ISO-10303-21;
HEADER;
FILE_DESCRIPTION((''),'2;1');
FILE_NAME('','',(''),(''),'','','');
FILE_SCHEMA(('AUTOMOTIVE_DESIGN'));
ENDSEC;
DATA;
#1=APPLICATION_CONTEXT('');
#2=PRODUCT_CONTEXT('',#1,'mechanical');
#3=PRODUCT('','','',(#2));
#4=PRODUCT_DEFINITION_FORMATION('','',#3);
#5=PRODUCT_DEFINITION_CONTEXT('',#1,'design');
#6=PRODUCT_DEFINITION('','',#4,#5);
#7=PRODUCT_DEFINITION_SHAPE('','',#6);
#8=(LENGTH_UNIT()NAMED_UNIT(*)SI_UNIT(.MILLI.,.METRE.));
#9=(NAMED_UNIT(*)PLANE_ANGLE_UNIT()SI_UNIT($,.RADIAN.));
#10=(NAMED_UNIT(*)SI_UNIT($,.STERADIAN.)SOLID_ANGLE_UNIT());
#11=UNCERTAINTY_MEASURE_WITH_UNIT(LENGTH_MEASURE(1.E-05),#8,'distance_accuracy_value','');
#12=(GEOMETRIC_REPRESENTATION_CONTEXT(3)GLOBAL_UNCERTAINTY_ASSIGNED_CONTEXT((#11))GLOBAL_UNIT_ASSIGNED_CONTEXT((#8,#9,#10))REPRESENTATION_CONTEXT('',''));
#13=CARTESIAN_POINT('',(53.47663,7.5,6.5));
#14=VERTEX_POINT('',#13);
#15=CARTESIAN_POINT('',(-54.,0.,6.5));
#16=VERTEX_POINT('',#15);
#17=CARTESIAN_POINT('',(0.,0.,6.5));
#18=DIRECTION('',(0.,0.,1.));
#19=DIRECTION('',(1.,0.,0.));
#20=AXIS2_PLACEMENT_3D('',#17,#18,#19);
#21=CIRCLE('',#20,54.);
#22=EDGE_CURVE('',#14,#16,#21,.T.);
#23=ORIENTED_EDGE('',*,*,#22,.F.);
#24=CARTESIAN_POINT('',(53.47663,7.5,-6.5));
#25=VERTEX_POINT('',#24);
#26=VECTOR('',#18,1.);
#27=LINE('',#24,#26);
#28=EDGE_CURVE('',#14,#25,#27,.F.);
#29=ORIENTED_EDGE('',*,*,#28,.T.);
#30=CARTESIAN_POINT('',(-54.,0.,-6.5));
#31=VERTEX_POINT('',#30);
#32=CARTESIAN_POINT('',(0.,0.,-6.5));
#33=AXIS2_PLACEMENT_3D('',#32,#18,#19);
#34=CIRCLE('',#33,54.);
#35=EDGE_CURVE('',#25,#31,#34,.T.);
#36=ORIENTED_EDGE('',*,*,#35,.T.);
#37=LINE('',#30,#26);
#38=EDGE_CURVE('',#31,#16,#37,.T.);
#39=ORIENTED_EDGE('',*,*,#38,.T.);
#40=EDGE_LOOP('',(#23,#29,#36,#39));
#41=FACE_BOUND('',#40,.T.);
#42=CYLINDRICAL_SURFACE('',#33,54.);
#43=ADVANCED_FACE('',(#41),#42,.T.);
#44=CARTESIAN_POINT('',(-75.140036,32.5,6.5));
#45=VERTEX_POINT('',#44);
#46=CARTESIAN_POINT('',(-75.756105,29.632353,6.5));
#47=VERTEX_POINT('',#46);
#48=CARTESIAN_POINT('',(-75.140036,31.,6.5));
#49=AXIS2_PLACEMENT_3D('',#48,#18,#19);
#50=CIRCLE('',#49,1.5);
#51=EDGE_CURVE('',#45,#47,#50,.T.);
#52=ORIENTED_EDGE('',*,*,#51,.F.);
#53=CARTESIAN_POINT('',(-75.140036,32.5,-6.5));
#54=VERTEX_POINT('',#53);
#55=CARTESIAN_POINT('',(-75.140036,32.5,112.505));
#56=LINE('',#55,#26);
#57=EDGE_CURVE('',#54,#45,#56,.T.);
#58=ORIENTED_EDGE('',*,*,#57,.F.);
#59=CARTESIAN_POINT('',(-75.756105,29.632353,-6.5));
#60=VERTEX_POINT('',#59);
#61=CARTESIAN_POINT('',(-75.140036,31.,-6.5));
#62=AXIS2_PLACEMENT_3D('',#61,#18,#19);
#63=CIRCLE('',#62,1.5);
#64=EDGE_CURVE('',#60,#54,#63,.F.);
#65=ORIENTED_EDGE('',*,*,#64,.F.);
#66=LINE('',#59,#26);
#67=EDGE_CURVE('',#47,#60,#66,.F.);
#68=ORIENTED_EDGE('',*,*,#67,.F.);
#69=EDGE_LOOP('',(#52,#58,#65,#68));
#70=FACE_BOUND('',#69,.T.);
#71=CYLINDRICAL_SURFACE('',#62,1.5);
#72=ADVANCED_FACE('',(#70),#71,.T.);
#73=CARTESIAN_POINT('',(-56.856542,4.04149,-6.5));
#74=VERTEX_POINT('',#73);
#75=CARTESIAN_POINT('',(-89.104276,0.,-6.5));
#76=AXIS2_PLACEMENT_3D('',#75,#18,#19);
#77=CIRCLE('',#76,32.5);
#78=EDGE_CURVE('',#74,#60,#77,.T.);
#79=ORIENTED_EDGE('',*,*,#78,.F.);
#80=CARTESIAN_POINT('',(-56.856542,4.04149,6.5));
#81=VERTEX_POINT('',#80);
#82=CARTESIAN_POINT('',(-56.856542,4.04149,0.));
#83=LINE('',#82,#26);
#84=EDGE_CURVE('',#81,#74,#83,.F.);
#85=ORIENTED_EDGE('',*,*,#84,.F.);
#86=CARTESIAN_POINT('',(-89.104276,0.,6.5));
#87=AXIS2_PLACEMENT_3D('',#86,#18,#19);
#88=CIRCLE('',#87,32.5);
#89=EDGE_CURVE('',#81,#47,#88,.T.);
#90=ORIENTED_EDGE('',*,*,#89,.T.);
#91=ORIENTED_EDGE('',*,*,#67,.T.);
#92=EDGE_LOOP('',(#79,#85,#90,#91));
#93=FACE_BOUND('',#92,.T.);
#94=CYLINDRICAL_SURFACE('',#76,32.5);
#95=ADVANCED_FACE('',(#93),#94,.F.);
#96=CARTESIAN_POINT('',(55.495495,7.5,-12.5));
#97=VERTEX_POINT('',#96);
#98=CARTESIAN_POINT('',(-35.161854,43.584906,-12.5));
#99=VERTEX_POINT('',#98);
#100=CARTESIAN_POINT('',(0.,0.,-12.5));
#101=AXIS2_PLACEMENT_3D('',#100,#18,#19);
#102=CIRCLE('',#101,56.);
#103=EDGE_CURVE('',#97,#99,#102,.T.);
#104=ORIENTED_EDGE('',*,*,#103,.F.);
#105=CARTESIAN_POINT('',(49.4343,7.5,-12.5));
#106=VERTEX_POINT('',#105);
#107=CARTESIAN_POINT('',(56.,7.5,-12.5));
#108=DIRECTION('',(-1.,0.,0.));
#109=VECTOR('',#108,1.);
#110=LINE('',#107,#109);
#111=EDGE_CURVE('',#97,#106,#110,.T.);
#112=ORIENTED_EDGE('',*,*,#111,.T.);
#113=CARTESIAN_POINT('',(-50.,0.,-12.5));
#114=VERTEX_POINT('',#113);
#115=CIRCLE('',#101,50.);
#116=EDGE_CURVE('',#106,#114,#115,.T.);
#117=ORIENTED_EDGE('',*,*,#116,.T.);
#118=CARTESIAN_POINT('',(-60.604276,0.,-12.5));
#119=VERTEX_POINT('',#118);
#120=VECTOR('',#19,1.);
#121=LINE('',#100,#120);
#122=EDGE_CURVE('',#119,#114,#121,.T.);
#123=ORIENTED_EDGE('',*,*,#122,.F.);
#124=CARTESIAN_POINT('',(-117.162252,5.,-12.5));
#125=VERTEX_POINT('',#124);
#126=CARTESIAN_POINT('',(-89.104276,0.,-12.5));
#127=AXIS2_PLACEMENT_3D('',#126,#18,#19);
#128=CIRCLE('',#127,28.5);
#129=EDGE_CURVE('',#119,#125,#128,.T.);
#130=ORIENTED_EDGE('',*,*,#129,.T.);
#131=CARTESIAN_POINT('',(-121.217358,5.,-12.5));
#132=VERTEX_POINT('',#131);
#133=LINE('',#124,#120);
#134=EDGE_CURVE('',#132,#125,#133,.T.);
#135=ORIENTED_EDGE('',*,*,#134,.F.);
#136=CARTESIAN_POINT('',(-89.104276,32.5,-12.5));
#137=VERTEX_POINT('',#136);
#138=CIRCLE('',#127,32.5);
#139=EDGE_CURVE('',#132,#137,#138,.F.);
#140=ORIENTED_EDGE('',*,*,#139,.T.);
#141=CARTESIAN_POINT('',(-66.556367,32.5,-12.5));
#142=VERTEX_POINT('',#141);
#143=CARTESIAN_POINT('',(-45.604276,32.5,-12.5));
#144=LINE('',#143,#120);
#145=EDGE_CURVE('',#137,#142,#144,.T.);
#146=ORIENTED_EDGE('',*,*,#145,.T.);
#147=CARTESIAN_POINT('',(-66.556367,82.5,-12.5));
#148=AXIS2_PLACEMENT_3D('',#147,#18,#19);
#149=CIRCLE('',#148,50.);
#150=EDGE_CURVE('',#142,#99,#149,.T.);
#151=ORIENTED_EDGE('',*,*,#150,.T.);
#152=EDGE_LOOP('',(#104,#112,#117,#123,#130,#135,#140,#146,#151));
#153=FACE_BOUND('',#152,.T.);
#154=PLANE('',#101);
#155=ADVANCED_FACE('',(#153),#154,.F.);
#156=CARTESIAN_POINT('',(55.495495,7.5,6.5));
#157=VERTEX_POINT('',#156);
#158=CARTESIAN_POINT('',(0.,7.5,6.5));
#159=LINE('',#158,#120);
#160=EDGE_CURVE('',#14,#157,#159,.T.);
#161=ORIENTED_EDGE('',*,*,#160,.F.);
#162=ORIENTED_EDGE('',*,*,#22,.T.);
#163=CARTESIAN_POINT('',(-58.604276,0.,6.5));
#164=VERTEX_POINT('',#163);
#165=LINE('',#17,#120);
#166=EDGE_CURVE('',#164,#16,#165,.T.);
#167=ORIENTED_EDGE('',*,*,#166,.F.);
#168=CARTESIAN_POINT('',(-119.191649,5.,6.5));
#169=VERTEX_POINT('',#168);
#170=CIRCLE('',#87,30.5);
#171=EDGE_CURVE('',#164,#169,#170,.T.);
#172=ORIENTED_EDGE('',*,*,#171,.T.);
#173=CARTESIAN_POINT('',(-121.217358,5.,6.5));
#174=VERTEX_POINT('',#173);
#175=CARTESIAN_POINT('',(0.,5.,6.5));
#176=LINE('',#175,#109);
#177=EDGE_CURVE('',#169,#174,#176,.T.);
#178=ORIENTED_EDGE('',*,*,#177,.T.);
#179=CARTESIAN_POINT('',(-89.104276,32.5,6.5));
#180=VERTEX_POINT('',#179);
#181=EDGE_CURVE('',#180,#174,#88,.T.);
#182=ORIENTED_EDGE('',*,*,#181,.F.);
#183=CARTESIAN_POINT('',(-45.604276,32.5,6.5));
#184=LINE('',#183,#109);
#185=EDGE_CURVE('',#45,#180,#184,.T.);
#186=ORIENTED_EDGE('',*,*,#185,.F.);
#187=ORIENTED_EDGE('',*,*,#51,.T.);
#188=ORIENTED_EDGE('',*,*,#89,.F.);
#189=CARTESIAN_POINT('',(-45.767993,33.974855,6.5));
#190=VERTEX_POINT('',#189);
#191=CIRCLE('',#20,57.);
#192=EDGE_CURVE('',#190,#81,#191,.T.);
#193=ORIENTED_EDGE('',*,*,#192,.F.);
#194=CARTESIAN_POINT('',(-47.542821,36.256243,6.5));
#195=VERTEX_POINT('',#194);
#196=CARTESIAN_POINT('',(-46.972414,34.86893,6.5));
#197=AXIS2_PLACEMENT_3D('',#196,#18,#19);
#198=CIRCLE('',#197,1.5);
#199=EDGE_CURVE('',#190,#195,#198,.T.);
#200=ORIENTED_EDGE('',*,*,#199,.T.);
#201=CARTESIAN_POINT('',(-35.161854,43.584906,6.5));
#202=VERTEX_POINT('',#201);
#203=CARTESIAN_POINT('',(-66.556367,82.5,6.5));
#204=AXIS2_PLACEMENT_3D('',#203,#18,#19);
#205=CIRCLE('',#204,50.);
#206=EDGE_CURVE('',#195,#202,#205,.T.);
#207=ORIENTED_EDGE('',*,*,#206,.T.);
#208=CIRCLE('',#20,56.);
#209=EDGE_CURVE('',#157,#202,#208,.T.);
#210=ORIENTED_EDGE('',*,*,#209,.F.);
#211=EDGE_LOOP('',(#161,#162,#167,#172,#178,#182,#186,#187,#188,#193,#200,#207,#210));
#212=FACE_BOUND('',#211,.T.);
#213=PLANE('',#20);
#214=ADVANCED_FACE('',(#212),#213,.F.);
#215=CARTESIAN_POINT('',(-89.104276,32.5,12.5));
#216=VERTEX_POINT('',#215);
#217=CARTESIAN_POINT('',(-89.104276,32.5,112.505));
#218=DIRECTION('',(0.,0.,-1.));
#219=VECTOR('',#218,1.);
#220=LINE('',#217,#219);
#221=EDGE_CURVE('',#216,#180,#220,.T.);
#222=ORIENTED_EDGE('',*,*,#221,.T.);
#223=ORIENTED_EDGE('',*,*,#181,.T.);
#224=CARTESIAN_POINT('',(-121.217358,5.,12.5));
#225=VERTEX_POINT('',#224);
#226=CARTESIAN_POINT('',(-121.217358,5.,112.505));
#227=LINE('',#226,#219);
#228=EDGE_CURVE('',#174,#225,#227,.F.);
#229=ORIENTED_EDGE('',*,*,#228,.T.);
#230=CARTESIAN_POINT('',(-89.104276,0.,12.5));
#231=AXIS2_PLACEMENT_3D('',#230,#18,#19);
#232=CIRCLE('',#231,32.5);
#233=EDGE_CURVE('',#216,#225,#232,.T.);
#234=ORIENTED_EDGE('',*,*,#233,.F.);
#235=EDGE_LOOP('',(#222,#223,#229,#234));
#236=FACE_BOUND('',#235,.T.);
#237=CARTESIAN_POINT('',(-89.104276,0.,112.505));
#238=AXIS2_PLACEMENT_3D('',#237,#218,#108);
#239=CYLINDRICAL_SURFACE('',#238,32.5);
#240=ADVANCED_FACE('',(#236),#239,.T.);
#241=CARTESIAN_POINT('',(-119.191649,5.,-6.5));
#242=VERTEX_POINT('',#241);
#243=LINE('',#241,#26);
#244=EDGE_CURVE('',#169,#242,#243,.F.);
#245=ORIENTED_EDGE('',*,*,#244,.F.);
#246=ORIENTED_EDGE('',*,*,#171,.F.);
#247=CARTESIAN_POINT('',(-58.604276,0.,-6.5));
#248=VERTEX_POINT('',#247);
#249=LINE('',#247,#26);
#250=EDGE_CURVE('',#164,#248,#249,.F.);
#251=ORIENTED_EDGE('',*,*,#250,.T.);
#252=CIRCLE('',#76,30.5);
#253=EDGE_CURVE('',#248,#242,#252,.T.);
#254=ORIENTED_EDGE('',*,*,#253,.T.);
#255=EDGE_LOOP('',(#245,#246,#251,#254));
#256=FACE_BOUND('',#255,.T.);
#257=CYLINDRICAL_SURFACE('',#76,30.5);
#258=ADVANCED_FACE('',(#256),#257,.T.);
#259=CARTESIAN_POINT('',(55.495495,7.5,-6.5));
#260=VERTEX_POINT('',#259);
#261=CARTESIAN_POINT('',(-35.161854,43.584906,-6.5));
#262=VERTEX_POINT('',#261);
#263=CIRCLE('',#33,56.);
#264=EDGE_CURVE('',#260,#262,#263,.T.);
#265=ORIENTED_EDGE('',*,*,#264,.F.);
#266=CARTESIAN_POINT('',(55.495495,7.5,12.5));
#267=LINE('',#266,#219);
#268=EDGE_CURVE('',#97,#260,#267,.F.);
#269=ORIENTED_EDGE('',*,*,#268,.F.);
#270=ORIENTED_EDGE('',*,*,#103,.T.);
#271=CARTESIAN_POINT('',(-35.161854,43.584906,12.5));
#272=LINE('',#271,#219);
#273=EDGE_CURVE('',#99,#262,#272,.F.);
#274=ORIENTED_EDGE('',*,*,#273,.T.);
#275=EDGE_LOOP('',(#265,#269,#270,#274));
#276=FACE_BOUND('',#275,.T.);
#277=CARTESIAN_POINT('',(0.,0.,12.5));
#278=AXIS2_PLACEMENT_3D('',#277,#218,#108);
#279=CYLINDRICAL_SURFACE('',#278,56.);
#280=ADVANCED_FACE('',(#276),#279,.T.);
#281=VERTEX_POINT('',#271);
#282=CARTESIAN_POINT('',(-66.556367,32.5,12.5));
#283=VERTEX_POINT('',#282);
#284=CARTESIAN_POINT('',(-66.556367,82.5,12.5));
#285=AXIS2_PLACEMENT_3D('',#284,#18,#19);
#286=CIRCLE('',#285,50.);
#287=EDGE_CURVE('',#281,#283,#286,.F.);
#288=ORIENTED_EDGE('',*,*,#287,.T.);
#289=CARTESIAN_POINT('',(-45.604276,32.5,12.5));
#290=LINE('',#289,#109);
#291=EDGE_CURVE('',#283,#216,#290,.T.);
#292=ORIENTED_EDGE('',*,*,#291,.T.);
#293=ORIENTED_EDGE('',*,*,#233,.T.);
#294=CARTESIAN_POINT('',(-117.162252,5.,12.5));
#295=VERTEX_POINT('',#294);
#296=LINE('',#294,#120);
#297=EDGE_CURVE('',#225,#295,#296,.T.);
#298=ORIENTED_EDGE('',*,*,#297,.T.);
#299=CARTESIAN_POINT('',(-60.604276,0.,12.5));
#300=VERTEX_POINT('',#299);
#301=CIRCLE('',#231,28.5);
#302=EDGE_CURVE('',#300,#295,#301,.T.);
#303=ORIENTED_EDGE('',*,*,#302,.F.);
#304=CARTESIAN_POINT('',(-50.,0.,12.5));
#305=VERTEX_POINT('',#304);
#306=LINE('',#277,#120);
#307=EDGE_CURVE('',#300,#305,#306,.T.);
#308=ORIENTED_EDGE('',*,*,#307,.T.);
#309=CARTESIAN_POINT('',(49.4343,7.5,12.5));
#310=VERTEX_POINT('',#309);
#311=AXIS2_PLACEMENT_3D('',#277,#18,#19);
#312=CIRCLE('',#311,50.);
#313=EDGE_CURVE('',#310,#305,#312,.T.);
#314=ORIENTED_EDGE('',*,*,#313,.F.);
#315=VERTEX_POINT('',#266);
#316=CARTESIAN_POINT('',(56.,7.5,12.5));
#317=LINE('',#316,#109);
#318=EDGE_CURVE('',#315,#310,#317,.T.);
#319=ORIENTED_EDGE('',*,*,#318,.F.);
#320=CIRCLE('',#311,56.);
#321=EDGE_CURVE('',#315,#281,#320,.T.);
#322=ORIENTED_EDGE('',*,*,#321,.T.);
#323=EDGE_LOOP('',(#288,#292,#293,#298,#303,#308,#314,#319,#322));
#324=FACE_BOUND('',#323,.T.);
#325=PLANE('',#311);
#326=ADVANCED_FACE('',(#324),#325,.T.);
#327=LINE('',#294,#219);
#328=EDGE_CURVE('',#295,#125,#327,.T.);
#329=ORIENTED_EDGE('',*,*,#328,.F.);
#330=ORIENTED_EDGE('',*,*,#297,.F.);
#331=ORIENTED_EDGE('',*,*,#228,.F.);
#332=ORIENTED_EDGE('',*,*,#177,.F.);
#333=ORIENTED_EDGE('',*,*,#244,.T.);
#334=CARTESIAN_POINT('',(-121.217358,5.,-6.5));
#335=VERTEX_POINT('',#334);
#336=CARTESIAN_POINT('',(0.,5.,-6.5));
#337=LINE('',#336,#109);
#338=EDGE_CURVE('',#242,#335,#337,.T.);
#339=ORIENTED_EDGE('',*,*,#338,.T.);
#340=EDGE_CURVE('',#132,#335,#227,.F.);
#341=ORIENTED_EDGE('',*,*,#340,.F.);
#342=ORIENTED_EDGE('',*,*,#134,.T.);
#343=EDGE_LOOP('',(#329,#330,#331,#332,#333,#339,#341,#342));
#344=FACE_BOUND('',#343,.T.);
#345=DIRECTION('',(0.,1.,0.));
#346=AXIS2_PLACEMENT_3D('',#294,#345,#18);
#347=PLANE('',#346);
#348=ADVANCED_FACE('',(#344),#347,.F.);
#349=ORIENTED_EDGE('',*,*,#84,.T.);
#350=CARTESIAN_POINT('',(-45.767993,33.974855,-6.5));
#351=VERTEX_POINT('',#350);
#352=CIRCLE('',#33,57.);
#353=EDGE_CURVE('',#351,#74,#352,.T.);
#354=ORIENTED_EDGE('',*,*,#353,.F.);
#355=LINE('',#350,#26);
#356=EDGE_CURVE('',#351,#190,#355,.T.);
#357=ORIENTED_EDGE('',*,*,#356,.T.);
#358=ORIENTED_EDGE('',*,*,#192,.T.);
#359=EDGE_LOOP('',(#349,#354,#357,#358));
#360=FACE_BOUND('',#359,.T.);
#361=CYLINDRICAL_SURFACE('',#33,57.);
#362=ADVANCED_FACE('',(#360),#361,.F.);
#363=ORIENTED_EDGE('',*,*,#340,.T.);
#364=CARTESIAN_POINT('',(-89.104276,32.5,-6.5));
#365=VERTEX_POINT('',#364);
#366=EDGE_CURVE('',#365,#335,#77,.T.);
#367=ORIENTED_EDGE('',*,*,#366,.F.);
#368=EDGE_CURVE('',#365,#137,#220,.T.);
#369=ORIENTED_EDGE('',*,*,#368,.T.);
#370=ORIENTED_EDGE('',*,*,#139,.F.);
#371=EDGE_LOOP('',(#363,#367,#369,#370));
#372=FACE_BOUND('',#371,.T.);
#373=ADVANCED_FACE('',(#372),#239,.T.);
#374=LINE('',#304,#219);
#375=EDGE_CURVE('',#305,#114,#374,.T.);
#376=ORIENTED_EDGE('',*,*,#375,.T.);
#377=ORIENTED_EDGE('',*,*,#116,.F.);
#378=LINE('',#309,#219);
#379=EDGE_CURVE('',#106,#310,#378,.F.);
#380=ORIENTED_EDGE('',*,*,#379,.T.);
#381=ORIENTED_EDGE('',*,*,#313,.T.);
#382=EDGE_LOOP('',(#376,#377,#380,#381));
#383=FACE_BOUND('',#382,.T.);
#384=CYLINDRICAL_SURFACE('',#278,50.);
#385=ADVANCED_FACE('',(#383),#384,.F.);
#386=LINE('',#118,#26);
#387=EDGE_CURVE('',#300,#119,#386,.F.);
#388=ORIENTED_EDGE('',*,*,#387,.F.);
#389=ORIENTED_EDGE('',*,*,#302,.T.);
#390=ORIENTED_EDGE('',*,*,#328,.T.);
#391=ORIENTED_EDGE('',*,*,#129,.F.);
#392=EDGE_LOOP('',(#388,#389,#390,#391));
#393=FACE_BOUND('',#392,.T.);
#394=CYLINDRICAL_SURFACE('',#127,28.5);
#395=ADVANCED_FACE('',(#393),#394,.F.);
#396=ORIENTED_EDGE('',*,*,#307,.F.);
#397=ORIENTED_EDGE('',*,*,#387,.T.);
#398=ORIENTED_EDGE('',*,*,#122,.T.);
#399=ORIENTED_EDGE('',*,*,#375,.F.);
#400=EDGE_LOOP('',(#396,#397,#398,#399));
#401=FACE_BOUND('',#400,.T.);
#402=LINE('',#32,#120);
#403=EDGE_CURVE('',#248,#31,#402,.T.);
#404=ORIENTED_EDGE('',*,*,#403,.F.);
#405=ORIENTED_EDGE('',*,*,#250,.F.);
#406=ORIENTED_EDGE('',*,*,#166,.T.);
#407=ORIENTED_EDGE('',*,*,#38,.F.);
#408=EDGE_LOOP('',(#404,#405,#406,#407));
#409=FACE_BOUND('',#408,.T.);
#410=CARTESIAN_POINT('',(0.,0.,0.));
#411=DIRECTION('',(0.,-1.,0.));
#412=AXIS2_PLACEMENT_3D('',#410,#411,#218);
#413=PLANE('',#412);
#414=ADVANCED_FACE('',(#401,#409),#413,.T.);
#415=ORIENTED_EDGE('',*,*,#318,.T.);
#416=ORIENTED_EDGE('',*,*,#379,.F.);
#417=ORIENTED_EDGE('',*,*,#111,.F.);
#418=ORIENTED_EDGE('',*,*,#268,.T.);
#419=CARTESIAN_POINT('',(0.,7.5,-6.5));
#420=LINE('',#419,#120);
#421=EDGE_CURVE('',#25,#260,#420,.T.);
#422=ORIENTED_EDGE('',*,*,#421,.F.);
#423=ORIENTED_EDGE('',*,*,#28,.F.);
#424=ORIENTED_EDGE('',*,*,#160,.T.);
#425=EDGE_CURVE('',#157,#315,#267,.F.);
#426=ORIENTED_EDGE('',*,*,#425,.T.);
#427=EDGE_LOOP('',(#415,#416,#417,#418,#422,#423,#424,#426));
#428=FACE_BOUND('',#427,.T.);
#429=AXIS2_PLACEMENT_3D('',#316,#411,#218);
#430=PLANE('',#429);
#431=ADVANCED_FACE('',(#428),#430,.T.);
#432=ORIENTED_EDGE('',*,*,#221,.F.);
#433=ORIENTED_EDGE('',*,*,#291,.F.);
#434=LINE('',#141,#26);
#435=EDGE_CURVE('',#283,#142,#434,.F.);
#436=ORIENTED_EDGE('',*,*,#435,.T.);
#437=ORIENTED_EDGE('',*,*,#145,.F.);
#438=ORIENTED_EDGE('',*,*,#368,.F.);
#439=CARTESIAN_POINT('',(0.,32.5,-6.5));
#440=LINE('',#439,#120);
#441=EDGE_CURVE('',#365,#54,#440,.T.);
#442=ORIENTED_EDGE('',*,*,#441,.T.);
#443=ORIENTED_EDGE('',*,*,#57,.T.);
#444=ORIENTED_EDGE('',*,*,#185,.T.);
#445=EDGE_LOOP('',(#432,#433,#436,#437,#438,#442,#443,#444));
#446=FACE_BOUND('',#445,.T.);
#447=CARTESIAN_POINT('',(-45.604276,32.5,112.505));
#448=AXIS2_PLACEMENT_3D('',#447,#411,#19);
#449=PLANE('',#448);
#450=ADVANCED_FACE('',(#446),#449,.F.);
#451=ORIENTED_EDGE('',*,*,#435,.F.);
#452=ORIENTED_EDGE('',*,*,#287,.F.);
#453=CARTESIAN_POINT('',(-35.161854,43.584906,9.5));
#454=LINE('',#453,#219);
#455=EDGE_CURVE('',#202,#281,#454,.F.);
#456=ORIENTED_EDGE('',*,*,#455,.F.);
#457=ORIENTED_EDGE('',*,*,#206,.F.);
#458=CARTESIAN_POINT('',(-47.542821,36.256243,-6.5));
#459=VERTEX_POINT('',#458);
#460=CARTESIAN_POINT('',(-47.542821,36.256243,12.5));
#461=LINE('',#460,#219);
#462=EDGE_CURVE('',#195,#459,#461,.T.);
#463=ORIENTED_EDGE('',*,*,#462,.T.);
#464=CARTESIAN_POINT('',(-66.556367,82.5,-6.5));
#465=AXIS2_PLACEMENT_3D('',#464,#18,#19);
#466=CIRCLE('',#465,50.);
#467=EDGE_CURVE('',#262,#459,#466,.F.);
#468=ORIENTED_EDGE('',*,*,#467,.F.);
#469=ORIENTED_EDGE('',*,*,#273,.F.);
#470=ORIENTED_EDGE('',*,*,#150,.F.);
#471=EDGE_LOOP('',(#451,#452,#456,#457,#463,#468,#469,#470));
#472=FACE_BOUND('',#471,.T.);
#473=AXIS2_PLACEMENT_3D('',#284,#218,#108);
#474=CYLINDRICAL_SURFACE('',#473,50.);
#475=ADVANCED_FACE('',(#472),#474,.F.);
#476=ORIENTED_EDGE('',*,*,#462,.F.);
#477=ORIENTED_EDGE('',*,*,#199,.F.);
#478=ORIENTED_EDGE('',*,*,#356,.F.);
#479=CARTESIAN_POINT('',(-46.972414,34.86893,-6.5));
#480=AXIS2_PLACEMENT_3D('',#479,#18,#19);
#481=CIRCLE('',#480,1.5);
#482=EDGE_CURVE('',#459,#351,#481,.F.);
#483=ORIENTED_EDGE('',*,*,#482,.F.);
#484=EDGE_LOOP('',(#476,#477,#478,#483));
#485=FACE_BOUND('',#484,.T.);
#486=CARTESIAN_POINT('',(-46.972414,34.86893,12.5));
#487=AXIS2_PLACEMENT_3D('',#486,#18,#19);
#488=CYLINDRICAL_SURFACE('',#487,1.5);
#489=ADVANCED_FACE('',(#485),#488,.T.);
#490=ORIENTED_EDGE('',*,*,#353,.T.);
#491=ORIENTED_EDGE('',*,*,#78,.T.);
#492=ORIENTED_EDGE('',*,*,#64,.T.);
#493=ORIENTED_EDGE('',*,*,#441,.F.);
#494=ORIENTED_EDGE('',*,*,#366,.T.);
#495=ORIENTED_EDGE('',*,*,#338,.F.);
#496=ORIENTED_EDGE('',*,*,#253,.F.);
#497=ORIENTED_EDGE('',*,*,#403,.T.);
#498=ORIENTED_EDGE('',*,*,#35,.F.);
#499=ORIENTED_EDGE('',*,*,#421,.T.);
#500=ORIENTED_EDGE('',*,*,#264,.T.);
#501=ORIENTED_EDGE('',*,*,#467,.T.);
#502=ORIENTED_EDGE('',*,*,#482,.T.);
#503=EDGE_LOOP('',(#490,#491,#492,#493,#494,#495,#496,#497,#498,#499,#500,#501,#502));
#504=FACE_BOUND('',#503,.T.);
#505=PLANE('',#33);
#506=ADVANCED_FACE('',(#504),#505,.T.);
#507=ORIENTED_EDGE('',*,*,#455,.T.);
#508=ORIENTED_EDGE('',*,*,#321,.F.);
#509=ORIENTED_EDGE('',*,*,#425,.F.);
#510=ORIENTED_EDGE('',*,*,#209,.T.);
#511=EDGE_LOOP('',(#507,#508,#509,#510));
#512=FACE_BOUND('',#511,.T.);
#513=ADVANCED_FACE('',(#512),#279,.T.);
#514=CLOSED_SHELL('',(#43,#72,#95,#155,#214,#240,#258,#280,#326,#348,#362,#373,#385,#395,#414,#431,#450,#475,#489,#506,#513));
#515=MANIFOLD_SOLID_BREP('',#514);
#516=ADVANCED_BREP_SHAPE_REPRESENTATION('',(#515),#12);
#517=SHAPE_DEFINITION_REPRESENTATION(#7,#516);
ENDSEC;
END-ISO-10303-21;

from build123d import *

# Parameters (mm, degrees)
SKETCH1_R                     = 56
SKETCH1_R_2                   = 50
MAIN_SHAPE_DEPTH              = 12.5
LIGHT_MOUNT_REACH             = 82.176
LIGHT_MOUNT_DIRECTION_2_REACH = 82.176
SKETCH3_R                     = 57
SKETCH3_R_2                   = 54
MAIN_SLOT_DEPTH               = 6.5
LIGHT_CUT_DEPTH               = 135.461332618
LIGHT_CUT_DEPTH_BACK          = 135.461332618
SKETCH8_R                     = 28.5
SKETCH9_R                     = 32.5
SKETCH9_R_2                   = 30.5
LIGHT_SLOT_DEPTH              = 6.5
LIGHT_MOUNT_FILLET_R          = 50
SKETCH17_W                    = 4.884048614
SKETCH17_H                    = 10
LIGHT_KEYWAY_DEPTH            = 137.193244948
SKETCH19_W                    = 25
SKETCH19_H                    = 15
CUT_EXTRUDE1_DEPTH            = 135.11151246
FILLET1_START                 = -6.5
FILLET1_DEPTH                 = 13
SKETCH20_W                    = 284.103750492
SKETCH20_H                    = 110.008077322
CUT_EXTRUDE2_DEPTH            = 135.11151246


with BuildPart() as part:
    # Sketch1 → main shape (new, symmetric)
    with BuildSketch(Plane.XY):
        Circle(SKETCH1_R)
        Circle(SKETCH1_R_2, mode=Mode.SUBTRACT)
    extrude(amount=MAIN_SHAPE_DEPTH, both=True)

    # light mount: up to this face of the body (flat: up to its plane)
    light_mount_end = Plane(part.part.faces().sort_by_distance((-54.41608081, 0, 12.5))[0])
    # Sketch6 → light mount (add, up to the picked face)
    with BuildSketch(Plane.XY, mode=Mode.PRIVATE) as light_mount_sk1:
        with BuildLine():
            Line((-45.604276115, 32.5), (-89.104276115, 32.5))
            ThreePointArc((-89.104276115, 32.5), (-121.604276115, 0), (-89.104276115, -32.5))
            Line((-89.104276115, -32.5), (-45.604276115, -32.5))
            ThreePointArc((-45.604276115, -32.5), (-56, 0), (-45.604276115, 32.5))
        make_face()
    light_mount_tool1 = split(extrude(light_mount_sk1.sketch, amount=LIGHT_MOUNT_REACH, mode=Mode.PRIVATE), bisect_by=light_mount_end, keep=Keep.BOTH, mode=Mode.PRIVATE)
    add(light_mount_tool1.solids().sort_by(Axis((-84.001692, 0, 0), (0, 0, 1)))[0])

    # light mount direction 2: up to this face of the body (flat: up to its plane)
    light_mount_direction_2_end = Plane(part.part.faces().sort_by_distance((-54.41608081, 0, -12.5))[0])
    # Sketch6 → light mount direction 2 (add, up to the picked face)
    with BuildSketch(Plane.XY, mode=Mode.PRIVATE) as light_mount_direction_2_sk1:
        with BuildLine():
            Line((-45.604276115, 32.5), (-89.104276115, 32.5))
            ThreePointArc((-89.104276115, 32.5), (-121.604276115, 0), (-89.104276115, -32.5))
            Line((-89.104276115, -32.5), (-45.604276115, -32.5))
            ThreePointArc((-45.604276115, -32.5), (-56, 0), (-45.604276115, 32.5))
        make_face()
    light_mount_direction_2_tool1 = split(extrude(light_mount_direction_2_sk1.sketch, amount=-LIGHT_MOUNT_DIRECTION_2_REACH, mode=Mode.PRIVATE), bisect_by=light_mount_direction_2_end, keep=Keep.BOTH, mode=Mode.PRIVATE)
    add(light_mount_direction_2_tool1.solids().sort_by(Axis((-84.001692, 0, 0), (0, 0, -1)))[0])

    # Sketch3 → main slot (cut, symmetric)
    with BuildSketch(Plane.XY):
        Circle(SKETCH3_R)
        Circle(SKETCH3_R_2, mode=Mode.SUBTRACT)
    extrude(amount=MAIN_SLOT_DEPTH, both=True, mode=Mode.SUBTRACT)

    # Sketch8 → light cut (cut, two sides: drawn at the far end of the back side and taken through both)
    with BuildSketch(Plane.XY.offset(-LIGHT_CUT_DEPTH_BACK)):
        with Locations((-89.104276115, 0)):
            Circle(SKETCH8_R)
    extrude(amount=LIGHT_CUT_DEPTH + LIGHT_CUT_DEPTH_BACK, mode=Mode.SUBTRACT)

    # Sketch9 → light slot (cut, symmetric)
    with BuildSketch(Plane.XY):
        with Locations((-89.104276115, 0)):
            Circle(SKETCH9_R)
        with Locations((-89.104276115, 0)):
            Circle(SKETCH9_R_2, mode=Mode.SUBTRACT)
    extrude(amount=LIGHT_SLOT_DEPTH, both=True, mode=Mode.SUBTRACT)

    # light mount fillet
    # the kernel refuses this fillet: 50 mm, written as the material it adds along each edge
    with BuildSketch(Plane(origin=(-45.604276115, 32.5, -12.5), x_dir=(0.6856978375591282, 0.7278863067586417, 0), z_dir=(0, 0, 1))) as light_mount_fillet_piece_1_section:
        with BuildLine():
            CenterArc((22.027511865, 49.535631995), LIGHT_MOUNT_FILLET_R, 223.290512858, 38.89464037)
            Line((-14.366803473, 15.250740117), (0, 0))
            ThreePointArc((0, 0), (7.614448546, 0.520092165), (15.228897092, 0))
        make_face()
    light_mount_fillet_piece_1 = extrude(amount=6, mode=Mode.PRIVATE)
    light_mount_fillet_piece_1 = light_mount_fillet_piece_1 & Plane(origin=(0, 0, -12.5), x_dir=(1, 0, 0), z_dir=(0, 0, 1)) * Cylinder(57, 74, mode=Mode.PRIVATE)
    add(light_mount_fillet_piece_1)
    with BuildSketch(Plane(origin=(-45.604276115, 32.5, -12.5), x_dir=(0.6856978375591282, 0.7278863067586417, 0), z_dir=(0, 0, 1))) as light_mount_fillet_piece_2_section:
        with BuildLine():
            CenterArc((22.027511865, 49.535631995), LIGHT_MOUNT_FILLET_R, 223.290512858, 38.89464037)
            Line((-14.366803473, 15.250740117), (0, 0))
            ThreePointArc((0, 0), (7.614448546, 0.520092165), (15.228897092, 0))
        make_face()
    light_mount_fillet_piece_2 = extrude(amount=6, mode=Mode.PRIVATE)
    light_mount_fillet_piece_2 = light_mount_fillet_piece_2 - Plane(origin=(0, 0, -12.5), x_dir=(1, 0, 0), z_dir=(0, 0, 1)) * Cylinder(57, 74, mode=Mode.PRIVATE)
    add(light_mount_fillet_piece_2)
    with BuildSketch(Plane(origin=(-45.604276115, 32.5, -12.5), x_dir=(0.6856978375591282, 0.7278863067586417, 0), z_dir=(0, 0, 1))) as light_mount_fillet_piece_3_section:
        with BuildLine():
            CenterArc((22.027511865, 49.535631995), LIGHT_MOUNT_FILLET_R, 223.290512858, 38.89464037)
            Line((-14.366803473, 15.250740117), (0, 0))
            ThreePointArc((0, 0), (7.614448546, 0.520092165), (15.228897092, 0))
        make_face()
    light_mount_fillet_piece_3 = extrude(amount=58.380227433, mode=Mode.PRIVATE)
    light_mount_fillet_piece_3 = split(light_mount_fillet_piece_3, bisect_by=Plane(origin=(-45.604276115, 32.5, -6.5), z_dir=(0, 0, 1)), keep=Keep.TOP, mode=Mode.PRIVATE)
    light_mount_fillet_piece_3 = split(light_mount_fillet_piece_3, bisect_by=Plane(origin=(-45.604276115, 32.5, 6.5), z_dir=(0, 0, -1)), keep=Keep.TOP, mode=Mode.PRIVATE)
    light_mount_fillet_piece_3 = light_mount_fillet_piece_3 - Plane(origin=(0, 0, -12.5), x_dir=(1, 0, 0), z_dir=(0, 0, 1)) * Cylinder(57, 178, mode=Mode.PRIVATE)
    add(light_mount_fillet_piece_3)
    with BuildSketch(Plane(origin=(-45.604276115, 32.5, -12.5), x_dir=(0.6856978375591282, 0.7278863067586417, 0), z_dir=(0, 0, 1))) as light_mount_fillet_piece_4_section:
        with BuildLine():
            CenterArc((22.027511865, 49.535631995), LIGHT_MOUNT_FILLET_R, 223.290512858, 38.89464037)
            Line((-14.366803473, 15.250740117), (0, 0))
            ThreePointArc((0, 0), (7.614448546, 0.520092165), (15.228897092, 0))
        make_face()
    light_mount_fillet_piece_4 = extrude(amount=58.380227433, mode=Mode.PRIVATE)
    light_mount_fillet_piece_4 = split(light_mount_fillet_piece_4, bisect_by=Plane(origin=(-45.604276115, 32.5, 12.5), z_dir=(0, 0, -1)), keep=Keep.TOP, mode=Mode.PRIVATE)
    light_mount_fillet_piece_4 = split(light_mount_fillet_piece_4, bisect_by=Plane(origin=(-45.604276115, 32.5, 6.5), z_dir=(0, 0, 1)), keep=Keep.TOP, mode=Mode.PRIVATE)
    light_mount_fillet_piece_4 = light_mount_fillet_piece_4 & Plane(origin=(0, 0, -12.5), x_dir=(1, 0, 0), z_dir=(0, 0, 1)) * Cylinder(57, 178, mode=Mode.PRIVATE)
    add(light_mount_fillet_piece_4)
    with BuildSketch(Plane(origin=(-45.604276115, 32.5, -12.5), x_dir=(0.6856978375591282, 0.7278863067586417, 0), z_dir=(0, 0, 1))) as light_mount_fillet_piece_5_section:
        with BuildLine():
            CenterArc((22.027511865, 49.535631995), LIGHT_MOUNT_FILLET_R, 223.290512858, 38.89464037)
            Line((-14.366803473, 15.250740117), (0, 0))
            ThreePointArc((0, 0), (7.614448546, 0.520092165), (15.228897092, 0))
        make_face()
    light_mount_fillet_piece_5 = extrude(amount=58.380227433, mode=Mode.PRIVATE)
    light_mount_fillet_piece_5 = split(light_mount_fillet_piece_5, bisect_by=Plane(origin=(-45.604276115, 32.5, 12.5), z_dir=(0, 0, -1)), keep=Keep.TOP, mode=Mode.PRIVATE)
    light_mount_fillet_piece_5 = split(light_mount_fillet_piece_5, bisect_by=Plane(origin=(-45.604276115, 32.5, 6.5), z_dir=(0, 0, 1)), keep=Keep.TOP, mode=Mode.PRIVATE)
    light_mount_fillet_piece_5 = light_mount_fillet_piece_5 - Plane(origin=(0, 0, -12.5), x_dir=(1, 0, 0), z_dir=(0, 0, 1)) * Cylinder(57, 178, mode=Mode.PRIVATE)
    add(light_mount_fillet_piece_5)
    with BuildSketch(Plane(origin=(-45.604276115, 32.5, -45.880227433), x_dir=(-1, 0, 0), z_dir=(0, 0, 1))) as light_mount_fillet_piece_6_section:
        with BuildLine():
            CenterArc((20.952090973, -50), LIGHT_MOUNT_FILLET_R, 90, 38.89464037)
            ThreePointArc((-10.442421804, -11.08490566), (-4.842642937, -5.899078903), (0, 0))
            Line((0, 0), (20.952090973, 0))
        make_face()
    light_mount_fillet_piece_6 = extrude(amount=58.380227433, mode=Mode.PRIVATE)
    light_mount_fillet_piece_6 = split(light_mount_fillet_piece_6, bisect_by=Plane(origin=(-45.604276115, 32.5, -6.5), z_dir=(0, 0, -1)), keep=Keep.TOP, mode=Mode.PRIVATE)
    light_mount_fillet_piece_6 = split(light_mount_fillet_piece_6, bisect_by=Plane(origin=(-45.604276115, 32.5, -12.5), z_dir=(0, 0, 1)), keep=Keep.TOP, mode=Mode.PRIVATE)
    light_mount_fillet_piece_6 = light_mount_fillet_piece_6 - Plane(origin=(0, 0, -45.880227433), x_dir=(1, 0, 0), z_dir=(0, 0, 1)) * Cylinder(57, 201, mode=Mode.PRIVATE)
    add(light_mount_fillet_piece_6)
    with BuildSketch(Plane(origin=(-45.604276115, 32.5, -45.880227433), x_dir=(-1, 0, 0), z_dir=(0, 0, 1))) as light_mount_fillet_piece_7_section:
        with BuildLine():
            CenterArc((20.952090973, -50), LIGHT_MOUNT_FILLET_R, 90, 38.89464037)
            ThreePointArc((-10.442421804, -11.08490566), (-4.842642937, -5.899078903), (0, 0))
            Line((0, 0), (20.952090973, 0))
        make_face()
    light_mount_fillet_piece_7 = extrude(amount=58.380227433, mode=Mode.PRIVATE)
    light_mount_fillet_piece_7 = split(light_mount_fillet_piece_7, bisect_by=Plane(origin=(-45.604276115, 32.5, -6.5), z_dir=(0, 0, -1)), keep=Keep.TOP, mode=Mode.PRIVATE)
    light_mount_fillet_piece_7 = split(light_mount_fillet_piece_7, bisect_by=Plane(origin=(-45.604276115, 32.5, -12.5), z_dir=(0, 0, 1)), keep=Keep.TOP, mode=Mode.PRIVATE)
    light_mount_fillet_piece_7 = light_mount_fillet_piece_7 & Plane(origin=(0, 0, -45.880227433), x_dir=(1, 0, 0), z_dir=(0, 0, 1)) * Cylinder(57, 201, mode=Mode.PRIVATE)
    add(light_mount_fillet_piece_7)
    with BuildSketch(Plane(origin=(-45.604276115, 32.5, -45.880227433), x_dir=(-1, 0, 0), z_dir=(0, 0, 1))) as light_mount_fillet_piece_8_section:
        with BuildLine():
            CenterArc((20.952090973, -50), LIGHT_MOUNT_FILLET_R, 90, 38.89464037)
            ThreePointArc((-10.442421804, -11.08490566), (-4.842642937, -5.899078903), (0, 0))
            Line((0, 0), (20.952090973, 0))
        make_face()
    light_mount_fillet_piece_8 = extrude(amount=58.380227433, mode=Mode.PRIVATE)
    light_mount_fillet_piece_8 = split(light_mount_fillet_piece_8, bisect_by=Plane(origin=(-45.604276115, 32.5, -6.5), z_dir=(0, 0, 1)), keep=Keep.TOP, mode=Mode.PRIVATE)
    light_mount_fillet_piece_8 = split(light_mount_fillet_piece_8, bisect_by=Plane(origin=(-45.604276115, 32.5, 6.5), z_dir=(0, 0, -1)), keep=Keep.TOP, mode=Mode.PRIVATE)
    light_mount_fillet_piece_8 = light_mount_fillet_piece_8 - Plane(origin=(0, 0, -45.880227433), x_dir=(1, 0, 0), z_dir=(0, 0, 1)) * Cylinder(57, 201, mode=Mode.PRIVATE)
    add(light_mount_fillet_piece_8)
    with BuildSketch(Plane(origin=(-45.604276115, 32.5, 6.5), x_dir=(-1, 0, 0), z_dir=(0, 0, 1))) as light_mount_fillet_piece_9_section:
        with BuildLine():
            CenterArc((20.952090973, -50), LIGHT_MOUNT_FILLET_R, 90, 38.89464037)
            ThreePointArc((-10.442421804, -11.08490566), (-4.842642937, -5.899078903), (0, 0))
            Line((0, 0), (20.952090973, 0))
        make_face()
    light_mount_fillet_piece_9 = extrude(amount=6, mode=Mode.PRIVATE)
    light_mount_fillet_piece_9 = light_mount_fillet_piece_9 - Plane(origin=(0, 0, 6.5), x_dir=(1, 0, 0), z_dir=(0, 0, 1)) * Cylinder(57, 96, mode=Mode.PRIVATE)
    add(light_mount_fillet_piece_9)
    with BuildSketch(Plane(origin=(-45.604276115, 32.5, 6.5), x_dir=(-1, 0, 0), z_dir=(0, 0, 1))) as light_mount_fillet_piece_10_section:
        with BuildLine():
            CenterArc((20.952090973, -50), LIGHT_MOUNT_FILLET_R, 90, 38.89464037)
            ThreePointArc((-10.442421804, -11.08490566), (-4.842642937, -5.899078903), (0, 0))
            Line((0, 0), (20.952090973, 0))
        make_face()
    light_mount_fillet_piece_10 = extrude(amount=6, mode=Mode.PRIVATE)
    light_mount_fillet_piece_10 = light_mount_fillet_piece_10 & Plane(origin=(0, 0, 6.5), x_dir=(1, 0, 0), z_dir=(0, 0, 1)) * Cylinder(57, 96, mode=Mode.PRIVATE)
    add(light_mount_fillet_piece_10)
    with BuildSketch(Plane(origin=(-45.604276115, -32.5, 12.5), x_dir=(-1, 0, 0), z_dir=(0, 0, -1))) as light_mount_fillet_piece_11_section:
        with BuildLine():
            CenterArc((20.952090973, -50), LIGHT_MOUNT_FILLET_R, 90, 38.89464037)
            ThreePointArc((-10.442421804, -11.08490566), (-4.842642937, -5.899078903), (0, 0))
            Line((0, 0), (20.952090973, 0))
        make_face()
    light_mount_fillet_piece_11 = extrude(amount=6, mode=Mode.PRIVATE)
    light_mount_fillet_piece_11 = light_mount_fillet_piece_11 - Plane(origin=(0, 0, 12.5), x_dir=(1, 0, 0), z_dir=(0, 0, 1)) * Cylinder(57, 96, mode=Mode.PRIVATE)
    add(light_mount_fillet_piece_11)
    with BuildSketch(Plane(origin=(-45.604276115, -32.5, 12.5), x_dir=(-1, 0, 0), z_dir=(0, 0, -1))) as light_mount_fillet_piece_12_section:
        with BuildLine():
            CenterArc((20.952090973, -50), LIGHT_MOUNT_FILLET_R, 90, 38.89464037)
            ThreePointArc((-10.442421804, -11.08490566), (-4.842642937, -5.899078903), (0, 0))
            Line((0, 0), (20.952090973, 0))
        make_face()
    light_mount_fillet_piece_12 = extrude(amount=6, mode=Mode.PRIVATE)
    light_mount_fillet_piece_12 = light_mount_fillet_piece_12 & Plane(origin=(0, 0, 12.5), x_dir=(1, 0, 0), z_dir=(0, 0, 1)) * Cylinder(57, 96, mode=Mode.PRIVATE)
    add(light_mount_fillet_piece_12)
    with BuildSketch(Plane(origin=(-45.604276115, -32.5, 12.5), x_dir=(-1, 0, 0), z_dir=(0, 0, -1))) as light_mount_fillet_piece_13_section:
        with BuildLine():
            CenterArc((20.952090973, -50), LIGHT_MOUNT_FILLET_R, 90, 38.89464037)
            ThreePointArc((-10.442421804, -11.08490566), (-4.842642937, -5.899078903), (0, 0))
            Line((0, 0), (20.952090973, 0))
        make_face()
    light_mount_fillet_piece_13 = extrude(amount=58.380227433, mode=Mode.PRIVATE)
    light_mount_fillet_piece_13 = split(light_mount_fillet_piece_13, bisect_by=Plane(origin=(-45.604276115, -32.5, -6.5), z_dir=(0, 0, 1)), keep=Keep.TOP, mode=Mode.PRIVATE)
    light_mount_fillet_piece_13 = split(light_mount_fillet_piece_13, bisect_by=Plane(origin=(-45.604276115, -32.5, 6.5), z_dir=(0, 0, -1)), keep=Keep.TOP, mode=Mode.PRIVATE)
    light_mount_fillet_piece_13 = light_mount_fillet_piece_13 - Plane(origin=(0, 0, 12.5), x_dir=(1, 0, 0), z_dir=(0, 0, 1)) * Cylinder(57, 201, mode=Mode.PRIVATE)
    add(light_mount_fillet_piece_13)
    with BuildSketch(Plane(origin=(-45.604276115, -32.5, 12.5), x_dir=(-1, 0, 0), z_dir=(0, 0, -1))) as light_mount_fillet_piece_14_section:
        with BuildLine():
            CenterArc((20.952090973, -50), LIGHT_MOUNT_FILLET_R, 90, 38.89464037)
            ThreePointArc((-10.442421804, -11.08490566), (-4.842642937, -5.899078903), (0, 0))
            Line((0, 0), (20.952090973, 0))
        make_face()
    light_mount_fillet_piece_14 = extrude(amount=58.380227433, mode=Mode.PRIVATE)
    light_mount_fillet_piece_14 = split(light_mount_fillet_piece_14, bisect_by=Plane(origin=(-45.604276115, -32.5, -6.5), z_dir=(0, 0, -1)), keep=Keep.TOP, mode=Mode.PRIVATE)
    light_mount_fillet_piece_14 = split(light_mount_fillet_piece_14, bisect_by=Plane(origin=(-45.604276115, -32.5, -12.5), z_dir=(0, 0, 1)), keep=Keep.TOP, mode=Mode.PRIVATE)
    light_mount_fillet_piece_14 = light_mount_fillet_piece_14 - Plane(origin=(0, 0, 12.5), x_dir=(1, 0, 0), z_dir=(0, 0, 1)) * Cylinder(57, 201, mode=Mode.PRIVATE)
    add(light_mount_fillet_piece_14)
    with BuildSketch(Plane(origin=(-45.604276115, -32.5, 12.5), x_dir=(-1, 0, 0), z_dir=(0, 0, -1))) as light_mount_fillet_piece_15_section:
        with BuildLine():
            CenterArc((20.952090973, -50), LIGHT_MOUNT_FILLET_R, 90, 38.89464037)
            ThreePointArc((-10.442421804, -11.08490566), (-4.842642937, -5.899078903), (0, 0))
            Line((0, 0), (20.952090973, 0))
        make_face()
    light_mount_fillet_piece_15 = extrude(amount=58.380227433, mode=Mode.PRIVATE)
    light_mount_fillet_piece_15 = split(light_mount_fillet_piece_15, bisect_by=Plane(origin=(-45.604276115, -32.5, -6.5), z_dir=(0, 0, -1)), keep=Keep.TOP, mode=Mode.PRIVATE)
    light_mount_fillet_piece_15 = split(light_mount_fillet_piece_15, bisect_by=Plane(origin=(-45.604276115, -32.5, -12.5), z_dir=(0, 0, 1)), keep=Keep.TOP, mode=Mode.PRIVATE)
    light_mount_fillet_piece_15 = light_mount_fillet_piece_15 & Plane(origin=(0, 0, 12.5), x_dir=(1, 0, 0), z_dir=(0, 0, 1)) * Cylinder(57, 201, mode=Mode.PRIVATE)
    add(light_mount_fillet_piece_15)
    with BuildSketch(Plane(origin=(-45.604276115, -32.5, 45.880227433), x_dir=(0.6856978375591277, -0.7278863067586421, 0), z_dir=(0, 0, -1))) as light_mount_fillet_piece_16_section:
        with BuildLine():
            CenterArc((22.027511865, 49.535631995), LIGHT_MOUNT_FILLET_R, 223.290512858, 38.89464037)
            Line((-14.366803473, 15.250740117), (0, 0))
            ThreePointArc((0, 0), (7.614448546, 0.520092165), (15.228897092, 0))
        make_face()
    light_mount_fillet_piece_16 = extrude(amount=58.380227433, mode=Mode.PRIVATE)
    light_mount_fillet_piece_16 = split(light_mount_fillet_piece_16, bisect_by=Plane(origin=(-45.604276115, -32.5, 6.5), z_dir=(0, 0, 1)), keep=Keep.TOP, mode=Mode.PRIVATE)
    light_mount_fillet_piece_16 = light_mount_fillet_piece_16 & Plane(origin=(0, 0, 45.880227433), x_dir=(1, 0, 0), z_dir=(0, 0, 1)) * Cylinder(57, 178, mode=Mode.PRIVATE)
    light_mount_fillet_piece_16 = split(light_mount_fillet_piece_16, bisect_by=Plane(origin=(-45.604276115, -32.5, 12.5), z_dir=(0, 0, -1)), keep=Keep.TOP, mode=Mode.PRIVATE)
    add(light_mount_fillet_piece_16)
    with BuildSketch(Plane(origin=(-45.604276115, -32.5, 45.880227433), x_dir=(0.6856978375591277, -0.7278863067586421, 0), z_dir=(0, 0, -1))) as light_mount_fillet_piece_17_section:
        with BuildLine():
            CenterArc((22.027511865, 49.535631995), LIGHT_MOUNT_FILLET_R, 223.290512858, 38.89464037)
            Line((-14.366803473, 15.250740117), (0, 0))
            ThreePointArc((0, 0), (7.614448546, 0.520092165), (15.228897092, 0))
        make_face()
    light_mount_fillet_piece_17 = extrude(amount=58.380227433, mode=Mode.PRIVATE)
    light_mount_fillet_piece_17 = split(light_mount_fillet_piece_17, bisect_by=Plane(origin=(-45.604276115, -32.5, 6.5), z_dir=(0, 0, 1)), keep=Keep.TOP, mode=Mode.PRIVATE)
    light_mount_fillet_piece_17 = light_mount_fillet_piece_17 - Plane(origin=(0, 0, 45.880227433), x_dir=(1, 0, 0), z_dir=(0, 0, 1)) * Cylinder(57, 178, mode=Mode.PRIVATE)
    light_mount_fillet_piece_17 = split(light_mount_fillet_piece_17, bisect_by=Plane(origin=(-45.604276115, -32.5, 12.5), z_dir=(0, 0, -1)), keep=Keep.TOP, mode=Mode.PRIVATE)
    add(light_mount_fillet_piece_17)
    with BuildSketch(Plane(origin=(-45.604276115, -32.5, 45.880227433), x_dir=(0.6856978375591277, -0.7278863067586421, 0), z_dir=(0, 0, -1))) as light_mount_fillet_piece_18_section:
        with BuildLine():
            CenterArc((22.027511865, 49.535631995), LIGHT_MOUNT_FILLET_R, 223.290512858, 38.89464037)
            Line((-14.366803473, 15.250740117), (0, 0))
            ThreePointArc((0, 0), (7.614448546, 0.520092165), (15.228897092, 0))
        make_face()
    light_mount_fillet_piece_18 = extrude(amount=58.380227433, mode=Mode.PRIVATE)
    light_mount_fillet_piece_18 = split(light_mount_fillet_piece_18, bisect_by=Plane(origin=(-45.604276115, -32.5, -6.5), z_dir=(0, 0, 1)), keep=Keep.TOP, mode=Mode.PRIVATE)
    light_mount_fillet_piece_18 = split(light_mount_fillet_piece_18, bisect_by=Plane(origin=(-45.604276115, -32.5, 6.5), z_dir=(0, 0, -1)), keep=Keep.TOP, mode=Mode.PRIVATE)
    light_mount_fillet_piece_18 = light_mount_fillet_piece_18 - Plane(origin=(0, 0, 45.880227433), x_dir=(1, 0, 0), z_dir=(0, 0, 1)) * Cylinder(57, 178, mode=Mode.PRIVATE)
    add(light_mount_fillet_piece_18)
    with BuildSketch(Plane(origin=(-45.604276115, -32.5, -6.5), x_dir=(0.6856978375591277, -0.7278863067586421, 0), z_dir=(0, 0, -1))) as light_mount_fillet_piece_19_section:
        with BuildLine():
            CenterArc((22.027511865, 49.535631995), LIGHT_MOUNT_FILLET_R, 223.290512858, 38.89464037)
            Line((-14.366803473, 15.250740117), (0, 0))
            ThreePointArc((0, 0), (7.614448546, 0.520092165), (15.228897092, 0))
        make_face()
    light_mount_fillet_piece_19 = extrude(amount=6, mode=Mode.PRIVATE)
    light_mount_fillet_piece_19 = light_mount_fillet_piece_19 & Plane(origin=(0, 0, -6.5), x_dir=(1, 0, 0), z_dir=(0, 0, 1)) * Cylinder(57, 74, mode=Mode.PRIVATE)
    add(light_mount_fillet_piece_19)
    with BuildSketch(Plane(origin=(-45.604276115, -32.5, -6.5), x_dir=(0.6856978375591277, -0.7278863067586421, 0), z_dir=(0, 0, -1))) as light_mount_fillet_piece_20_section:
        with BuildLine():
            CenterArc((22.027511865, 49.535631995), LIGHT_MOUNT_FILLET_R, 223.290512858, 38.89464037)
            Line((-14.366803473, 15.250740117), (0, 0))
            ThreePointArc((0, 0), (7.614448546, 0.520092165), (15.228897092, 0))
        make_face()
    light_mount_fillet_piece_20 = extrude(amount=6, mode=Mode.PRIVATE)
    light_mount_fillet_piece_20 = light_mount_fillet_piece_20 - Plane(origin=(0, 0, -6.5), x_dir=(1, 0, 0), z_dir=(0, 0, 1)) * Cylinder(57, 74, mode=Mode.PRIVATE)
    add(light_mount_fillet_piece_20)

    # Sketch17 → light keyway (cut, through all)
    with BuildSketch(Plane(origin=(0, 0, -12.5), x_dir=(-1, 0, 0), z_dir=(0, 0, -1))):
        with Locations((119.604276115, 0)):
            Rectangle(SKETCH17_W, SKETCH17_H)
    extrude(amount=-LIGHT_KEYWAY_DEPTH, mode=Mode.SUBTRACT)

    # Sketch19 → Cut-Extrude1 (cut, through all)
    with BuildSketch(Plane(origin=(0, 0, 0), x_dir=(0, 0, -1), z_dir=(1, 0, 0))):
        Rectangle(SKETCH19_W, SKETCH19_H)
    extrude(amount=CUT_EXTRUDE1_DEPTH, mode=Mode.SUBTRACT)

    # Fillet1: read off the stored shape, not the designer's step
    # Fillet1 outline → Fillet1 (cut)
    with BuildSketch(Plane.XY.offset(FILLET1_START)):
        with BuildLine():
            ThreePointArc((-41.163605135, -39.427878618), (-43.551229208, -36.773501798), (-45.767993257, -33.974855309))
            ThreePointArc((-45.767993257, -33.974855309), (-45.788490057, -35.789975391), (-47.542820528, -36.256243154))
            ThreePointArc((-47.542820528, -36.256243154), (-44.296652875, -37.728299974), (-41.163605135, -39.427878618))
        make_face()
        with BuildLine():
            ThreePointArc((-75.140036072, -32.5), (-76.606574613, -31.315063018), (-75.756105485, -29.632352941))
            ThreePointArc((-75.756105485, -29.632352941), (-82.277910705, -31.775001735), (-89.104276115, -32.5))
            Line((-89.104276115, -32.5), (-75.140036072, -32.5))
        make_face()
        with BuildLine():
            ThreePointArc((-47.542820528, 36.256243154), (-45.788490057, 35.789975391), (-45.767993256, 33.974855309))
            ThreePointArc((-45.767993256, 33.974855309), (-43.551229208, 36.773501798), (-41.163605135, 39.427878618))
            ThreePointArc((-41.163605135, 39.427878618), (-44.296652875, 37.728299974), (-47.542820528, 36.256243154))
        make_face()
        with BuildLine():
            ThreePointArc((-89.104276115, 32.5), (-82.277910705, 31.775001735), (-75.756105485, 29.632352941))
            ThreePointArc((-75.756105485, 29.632352941), (-76.606574613, 31.315063018), (-75.140036072, 32.5))
            Line((-75.140036072, 32.5), (-89.104276115, 32.5))
        make_face()
    extrude(amount=FILLET1_DEPTH, mode=Mode.SUBTRACT)

    # Sketch20 → Cut-Extrude2 (cut, through all)
    with BuildSketch(Plane(origin=(0, 0, 0), x_dir=(1, 0, 0), z_dir=(0, 1, 0))):
        Rectangle(SKETCH20_W, SKETCH20_H)
    extrude(amount=-CUT_EXTRUDE2_DEPTH, mode=Mode.SUBTRACT)


solid = part.part
